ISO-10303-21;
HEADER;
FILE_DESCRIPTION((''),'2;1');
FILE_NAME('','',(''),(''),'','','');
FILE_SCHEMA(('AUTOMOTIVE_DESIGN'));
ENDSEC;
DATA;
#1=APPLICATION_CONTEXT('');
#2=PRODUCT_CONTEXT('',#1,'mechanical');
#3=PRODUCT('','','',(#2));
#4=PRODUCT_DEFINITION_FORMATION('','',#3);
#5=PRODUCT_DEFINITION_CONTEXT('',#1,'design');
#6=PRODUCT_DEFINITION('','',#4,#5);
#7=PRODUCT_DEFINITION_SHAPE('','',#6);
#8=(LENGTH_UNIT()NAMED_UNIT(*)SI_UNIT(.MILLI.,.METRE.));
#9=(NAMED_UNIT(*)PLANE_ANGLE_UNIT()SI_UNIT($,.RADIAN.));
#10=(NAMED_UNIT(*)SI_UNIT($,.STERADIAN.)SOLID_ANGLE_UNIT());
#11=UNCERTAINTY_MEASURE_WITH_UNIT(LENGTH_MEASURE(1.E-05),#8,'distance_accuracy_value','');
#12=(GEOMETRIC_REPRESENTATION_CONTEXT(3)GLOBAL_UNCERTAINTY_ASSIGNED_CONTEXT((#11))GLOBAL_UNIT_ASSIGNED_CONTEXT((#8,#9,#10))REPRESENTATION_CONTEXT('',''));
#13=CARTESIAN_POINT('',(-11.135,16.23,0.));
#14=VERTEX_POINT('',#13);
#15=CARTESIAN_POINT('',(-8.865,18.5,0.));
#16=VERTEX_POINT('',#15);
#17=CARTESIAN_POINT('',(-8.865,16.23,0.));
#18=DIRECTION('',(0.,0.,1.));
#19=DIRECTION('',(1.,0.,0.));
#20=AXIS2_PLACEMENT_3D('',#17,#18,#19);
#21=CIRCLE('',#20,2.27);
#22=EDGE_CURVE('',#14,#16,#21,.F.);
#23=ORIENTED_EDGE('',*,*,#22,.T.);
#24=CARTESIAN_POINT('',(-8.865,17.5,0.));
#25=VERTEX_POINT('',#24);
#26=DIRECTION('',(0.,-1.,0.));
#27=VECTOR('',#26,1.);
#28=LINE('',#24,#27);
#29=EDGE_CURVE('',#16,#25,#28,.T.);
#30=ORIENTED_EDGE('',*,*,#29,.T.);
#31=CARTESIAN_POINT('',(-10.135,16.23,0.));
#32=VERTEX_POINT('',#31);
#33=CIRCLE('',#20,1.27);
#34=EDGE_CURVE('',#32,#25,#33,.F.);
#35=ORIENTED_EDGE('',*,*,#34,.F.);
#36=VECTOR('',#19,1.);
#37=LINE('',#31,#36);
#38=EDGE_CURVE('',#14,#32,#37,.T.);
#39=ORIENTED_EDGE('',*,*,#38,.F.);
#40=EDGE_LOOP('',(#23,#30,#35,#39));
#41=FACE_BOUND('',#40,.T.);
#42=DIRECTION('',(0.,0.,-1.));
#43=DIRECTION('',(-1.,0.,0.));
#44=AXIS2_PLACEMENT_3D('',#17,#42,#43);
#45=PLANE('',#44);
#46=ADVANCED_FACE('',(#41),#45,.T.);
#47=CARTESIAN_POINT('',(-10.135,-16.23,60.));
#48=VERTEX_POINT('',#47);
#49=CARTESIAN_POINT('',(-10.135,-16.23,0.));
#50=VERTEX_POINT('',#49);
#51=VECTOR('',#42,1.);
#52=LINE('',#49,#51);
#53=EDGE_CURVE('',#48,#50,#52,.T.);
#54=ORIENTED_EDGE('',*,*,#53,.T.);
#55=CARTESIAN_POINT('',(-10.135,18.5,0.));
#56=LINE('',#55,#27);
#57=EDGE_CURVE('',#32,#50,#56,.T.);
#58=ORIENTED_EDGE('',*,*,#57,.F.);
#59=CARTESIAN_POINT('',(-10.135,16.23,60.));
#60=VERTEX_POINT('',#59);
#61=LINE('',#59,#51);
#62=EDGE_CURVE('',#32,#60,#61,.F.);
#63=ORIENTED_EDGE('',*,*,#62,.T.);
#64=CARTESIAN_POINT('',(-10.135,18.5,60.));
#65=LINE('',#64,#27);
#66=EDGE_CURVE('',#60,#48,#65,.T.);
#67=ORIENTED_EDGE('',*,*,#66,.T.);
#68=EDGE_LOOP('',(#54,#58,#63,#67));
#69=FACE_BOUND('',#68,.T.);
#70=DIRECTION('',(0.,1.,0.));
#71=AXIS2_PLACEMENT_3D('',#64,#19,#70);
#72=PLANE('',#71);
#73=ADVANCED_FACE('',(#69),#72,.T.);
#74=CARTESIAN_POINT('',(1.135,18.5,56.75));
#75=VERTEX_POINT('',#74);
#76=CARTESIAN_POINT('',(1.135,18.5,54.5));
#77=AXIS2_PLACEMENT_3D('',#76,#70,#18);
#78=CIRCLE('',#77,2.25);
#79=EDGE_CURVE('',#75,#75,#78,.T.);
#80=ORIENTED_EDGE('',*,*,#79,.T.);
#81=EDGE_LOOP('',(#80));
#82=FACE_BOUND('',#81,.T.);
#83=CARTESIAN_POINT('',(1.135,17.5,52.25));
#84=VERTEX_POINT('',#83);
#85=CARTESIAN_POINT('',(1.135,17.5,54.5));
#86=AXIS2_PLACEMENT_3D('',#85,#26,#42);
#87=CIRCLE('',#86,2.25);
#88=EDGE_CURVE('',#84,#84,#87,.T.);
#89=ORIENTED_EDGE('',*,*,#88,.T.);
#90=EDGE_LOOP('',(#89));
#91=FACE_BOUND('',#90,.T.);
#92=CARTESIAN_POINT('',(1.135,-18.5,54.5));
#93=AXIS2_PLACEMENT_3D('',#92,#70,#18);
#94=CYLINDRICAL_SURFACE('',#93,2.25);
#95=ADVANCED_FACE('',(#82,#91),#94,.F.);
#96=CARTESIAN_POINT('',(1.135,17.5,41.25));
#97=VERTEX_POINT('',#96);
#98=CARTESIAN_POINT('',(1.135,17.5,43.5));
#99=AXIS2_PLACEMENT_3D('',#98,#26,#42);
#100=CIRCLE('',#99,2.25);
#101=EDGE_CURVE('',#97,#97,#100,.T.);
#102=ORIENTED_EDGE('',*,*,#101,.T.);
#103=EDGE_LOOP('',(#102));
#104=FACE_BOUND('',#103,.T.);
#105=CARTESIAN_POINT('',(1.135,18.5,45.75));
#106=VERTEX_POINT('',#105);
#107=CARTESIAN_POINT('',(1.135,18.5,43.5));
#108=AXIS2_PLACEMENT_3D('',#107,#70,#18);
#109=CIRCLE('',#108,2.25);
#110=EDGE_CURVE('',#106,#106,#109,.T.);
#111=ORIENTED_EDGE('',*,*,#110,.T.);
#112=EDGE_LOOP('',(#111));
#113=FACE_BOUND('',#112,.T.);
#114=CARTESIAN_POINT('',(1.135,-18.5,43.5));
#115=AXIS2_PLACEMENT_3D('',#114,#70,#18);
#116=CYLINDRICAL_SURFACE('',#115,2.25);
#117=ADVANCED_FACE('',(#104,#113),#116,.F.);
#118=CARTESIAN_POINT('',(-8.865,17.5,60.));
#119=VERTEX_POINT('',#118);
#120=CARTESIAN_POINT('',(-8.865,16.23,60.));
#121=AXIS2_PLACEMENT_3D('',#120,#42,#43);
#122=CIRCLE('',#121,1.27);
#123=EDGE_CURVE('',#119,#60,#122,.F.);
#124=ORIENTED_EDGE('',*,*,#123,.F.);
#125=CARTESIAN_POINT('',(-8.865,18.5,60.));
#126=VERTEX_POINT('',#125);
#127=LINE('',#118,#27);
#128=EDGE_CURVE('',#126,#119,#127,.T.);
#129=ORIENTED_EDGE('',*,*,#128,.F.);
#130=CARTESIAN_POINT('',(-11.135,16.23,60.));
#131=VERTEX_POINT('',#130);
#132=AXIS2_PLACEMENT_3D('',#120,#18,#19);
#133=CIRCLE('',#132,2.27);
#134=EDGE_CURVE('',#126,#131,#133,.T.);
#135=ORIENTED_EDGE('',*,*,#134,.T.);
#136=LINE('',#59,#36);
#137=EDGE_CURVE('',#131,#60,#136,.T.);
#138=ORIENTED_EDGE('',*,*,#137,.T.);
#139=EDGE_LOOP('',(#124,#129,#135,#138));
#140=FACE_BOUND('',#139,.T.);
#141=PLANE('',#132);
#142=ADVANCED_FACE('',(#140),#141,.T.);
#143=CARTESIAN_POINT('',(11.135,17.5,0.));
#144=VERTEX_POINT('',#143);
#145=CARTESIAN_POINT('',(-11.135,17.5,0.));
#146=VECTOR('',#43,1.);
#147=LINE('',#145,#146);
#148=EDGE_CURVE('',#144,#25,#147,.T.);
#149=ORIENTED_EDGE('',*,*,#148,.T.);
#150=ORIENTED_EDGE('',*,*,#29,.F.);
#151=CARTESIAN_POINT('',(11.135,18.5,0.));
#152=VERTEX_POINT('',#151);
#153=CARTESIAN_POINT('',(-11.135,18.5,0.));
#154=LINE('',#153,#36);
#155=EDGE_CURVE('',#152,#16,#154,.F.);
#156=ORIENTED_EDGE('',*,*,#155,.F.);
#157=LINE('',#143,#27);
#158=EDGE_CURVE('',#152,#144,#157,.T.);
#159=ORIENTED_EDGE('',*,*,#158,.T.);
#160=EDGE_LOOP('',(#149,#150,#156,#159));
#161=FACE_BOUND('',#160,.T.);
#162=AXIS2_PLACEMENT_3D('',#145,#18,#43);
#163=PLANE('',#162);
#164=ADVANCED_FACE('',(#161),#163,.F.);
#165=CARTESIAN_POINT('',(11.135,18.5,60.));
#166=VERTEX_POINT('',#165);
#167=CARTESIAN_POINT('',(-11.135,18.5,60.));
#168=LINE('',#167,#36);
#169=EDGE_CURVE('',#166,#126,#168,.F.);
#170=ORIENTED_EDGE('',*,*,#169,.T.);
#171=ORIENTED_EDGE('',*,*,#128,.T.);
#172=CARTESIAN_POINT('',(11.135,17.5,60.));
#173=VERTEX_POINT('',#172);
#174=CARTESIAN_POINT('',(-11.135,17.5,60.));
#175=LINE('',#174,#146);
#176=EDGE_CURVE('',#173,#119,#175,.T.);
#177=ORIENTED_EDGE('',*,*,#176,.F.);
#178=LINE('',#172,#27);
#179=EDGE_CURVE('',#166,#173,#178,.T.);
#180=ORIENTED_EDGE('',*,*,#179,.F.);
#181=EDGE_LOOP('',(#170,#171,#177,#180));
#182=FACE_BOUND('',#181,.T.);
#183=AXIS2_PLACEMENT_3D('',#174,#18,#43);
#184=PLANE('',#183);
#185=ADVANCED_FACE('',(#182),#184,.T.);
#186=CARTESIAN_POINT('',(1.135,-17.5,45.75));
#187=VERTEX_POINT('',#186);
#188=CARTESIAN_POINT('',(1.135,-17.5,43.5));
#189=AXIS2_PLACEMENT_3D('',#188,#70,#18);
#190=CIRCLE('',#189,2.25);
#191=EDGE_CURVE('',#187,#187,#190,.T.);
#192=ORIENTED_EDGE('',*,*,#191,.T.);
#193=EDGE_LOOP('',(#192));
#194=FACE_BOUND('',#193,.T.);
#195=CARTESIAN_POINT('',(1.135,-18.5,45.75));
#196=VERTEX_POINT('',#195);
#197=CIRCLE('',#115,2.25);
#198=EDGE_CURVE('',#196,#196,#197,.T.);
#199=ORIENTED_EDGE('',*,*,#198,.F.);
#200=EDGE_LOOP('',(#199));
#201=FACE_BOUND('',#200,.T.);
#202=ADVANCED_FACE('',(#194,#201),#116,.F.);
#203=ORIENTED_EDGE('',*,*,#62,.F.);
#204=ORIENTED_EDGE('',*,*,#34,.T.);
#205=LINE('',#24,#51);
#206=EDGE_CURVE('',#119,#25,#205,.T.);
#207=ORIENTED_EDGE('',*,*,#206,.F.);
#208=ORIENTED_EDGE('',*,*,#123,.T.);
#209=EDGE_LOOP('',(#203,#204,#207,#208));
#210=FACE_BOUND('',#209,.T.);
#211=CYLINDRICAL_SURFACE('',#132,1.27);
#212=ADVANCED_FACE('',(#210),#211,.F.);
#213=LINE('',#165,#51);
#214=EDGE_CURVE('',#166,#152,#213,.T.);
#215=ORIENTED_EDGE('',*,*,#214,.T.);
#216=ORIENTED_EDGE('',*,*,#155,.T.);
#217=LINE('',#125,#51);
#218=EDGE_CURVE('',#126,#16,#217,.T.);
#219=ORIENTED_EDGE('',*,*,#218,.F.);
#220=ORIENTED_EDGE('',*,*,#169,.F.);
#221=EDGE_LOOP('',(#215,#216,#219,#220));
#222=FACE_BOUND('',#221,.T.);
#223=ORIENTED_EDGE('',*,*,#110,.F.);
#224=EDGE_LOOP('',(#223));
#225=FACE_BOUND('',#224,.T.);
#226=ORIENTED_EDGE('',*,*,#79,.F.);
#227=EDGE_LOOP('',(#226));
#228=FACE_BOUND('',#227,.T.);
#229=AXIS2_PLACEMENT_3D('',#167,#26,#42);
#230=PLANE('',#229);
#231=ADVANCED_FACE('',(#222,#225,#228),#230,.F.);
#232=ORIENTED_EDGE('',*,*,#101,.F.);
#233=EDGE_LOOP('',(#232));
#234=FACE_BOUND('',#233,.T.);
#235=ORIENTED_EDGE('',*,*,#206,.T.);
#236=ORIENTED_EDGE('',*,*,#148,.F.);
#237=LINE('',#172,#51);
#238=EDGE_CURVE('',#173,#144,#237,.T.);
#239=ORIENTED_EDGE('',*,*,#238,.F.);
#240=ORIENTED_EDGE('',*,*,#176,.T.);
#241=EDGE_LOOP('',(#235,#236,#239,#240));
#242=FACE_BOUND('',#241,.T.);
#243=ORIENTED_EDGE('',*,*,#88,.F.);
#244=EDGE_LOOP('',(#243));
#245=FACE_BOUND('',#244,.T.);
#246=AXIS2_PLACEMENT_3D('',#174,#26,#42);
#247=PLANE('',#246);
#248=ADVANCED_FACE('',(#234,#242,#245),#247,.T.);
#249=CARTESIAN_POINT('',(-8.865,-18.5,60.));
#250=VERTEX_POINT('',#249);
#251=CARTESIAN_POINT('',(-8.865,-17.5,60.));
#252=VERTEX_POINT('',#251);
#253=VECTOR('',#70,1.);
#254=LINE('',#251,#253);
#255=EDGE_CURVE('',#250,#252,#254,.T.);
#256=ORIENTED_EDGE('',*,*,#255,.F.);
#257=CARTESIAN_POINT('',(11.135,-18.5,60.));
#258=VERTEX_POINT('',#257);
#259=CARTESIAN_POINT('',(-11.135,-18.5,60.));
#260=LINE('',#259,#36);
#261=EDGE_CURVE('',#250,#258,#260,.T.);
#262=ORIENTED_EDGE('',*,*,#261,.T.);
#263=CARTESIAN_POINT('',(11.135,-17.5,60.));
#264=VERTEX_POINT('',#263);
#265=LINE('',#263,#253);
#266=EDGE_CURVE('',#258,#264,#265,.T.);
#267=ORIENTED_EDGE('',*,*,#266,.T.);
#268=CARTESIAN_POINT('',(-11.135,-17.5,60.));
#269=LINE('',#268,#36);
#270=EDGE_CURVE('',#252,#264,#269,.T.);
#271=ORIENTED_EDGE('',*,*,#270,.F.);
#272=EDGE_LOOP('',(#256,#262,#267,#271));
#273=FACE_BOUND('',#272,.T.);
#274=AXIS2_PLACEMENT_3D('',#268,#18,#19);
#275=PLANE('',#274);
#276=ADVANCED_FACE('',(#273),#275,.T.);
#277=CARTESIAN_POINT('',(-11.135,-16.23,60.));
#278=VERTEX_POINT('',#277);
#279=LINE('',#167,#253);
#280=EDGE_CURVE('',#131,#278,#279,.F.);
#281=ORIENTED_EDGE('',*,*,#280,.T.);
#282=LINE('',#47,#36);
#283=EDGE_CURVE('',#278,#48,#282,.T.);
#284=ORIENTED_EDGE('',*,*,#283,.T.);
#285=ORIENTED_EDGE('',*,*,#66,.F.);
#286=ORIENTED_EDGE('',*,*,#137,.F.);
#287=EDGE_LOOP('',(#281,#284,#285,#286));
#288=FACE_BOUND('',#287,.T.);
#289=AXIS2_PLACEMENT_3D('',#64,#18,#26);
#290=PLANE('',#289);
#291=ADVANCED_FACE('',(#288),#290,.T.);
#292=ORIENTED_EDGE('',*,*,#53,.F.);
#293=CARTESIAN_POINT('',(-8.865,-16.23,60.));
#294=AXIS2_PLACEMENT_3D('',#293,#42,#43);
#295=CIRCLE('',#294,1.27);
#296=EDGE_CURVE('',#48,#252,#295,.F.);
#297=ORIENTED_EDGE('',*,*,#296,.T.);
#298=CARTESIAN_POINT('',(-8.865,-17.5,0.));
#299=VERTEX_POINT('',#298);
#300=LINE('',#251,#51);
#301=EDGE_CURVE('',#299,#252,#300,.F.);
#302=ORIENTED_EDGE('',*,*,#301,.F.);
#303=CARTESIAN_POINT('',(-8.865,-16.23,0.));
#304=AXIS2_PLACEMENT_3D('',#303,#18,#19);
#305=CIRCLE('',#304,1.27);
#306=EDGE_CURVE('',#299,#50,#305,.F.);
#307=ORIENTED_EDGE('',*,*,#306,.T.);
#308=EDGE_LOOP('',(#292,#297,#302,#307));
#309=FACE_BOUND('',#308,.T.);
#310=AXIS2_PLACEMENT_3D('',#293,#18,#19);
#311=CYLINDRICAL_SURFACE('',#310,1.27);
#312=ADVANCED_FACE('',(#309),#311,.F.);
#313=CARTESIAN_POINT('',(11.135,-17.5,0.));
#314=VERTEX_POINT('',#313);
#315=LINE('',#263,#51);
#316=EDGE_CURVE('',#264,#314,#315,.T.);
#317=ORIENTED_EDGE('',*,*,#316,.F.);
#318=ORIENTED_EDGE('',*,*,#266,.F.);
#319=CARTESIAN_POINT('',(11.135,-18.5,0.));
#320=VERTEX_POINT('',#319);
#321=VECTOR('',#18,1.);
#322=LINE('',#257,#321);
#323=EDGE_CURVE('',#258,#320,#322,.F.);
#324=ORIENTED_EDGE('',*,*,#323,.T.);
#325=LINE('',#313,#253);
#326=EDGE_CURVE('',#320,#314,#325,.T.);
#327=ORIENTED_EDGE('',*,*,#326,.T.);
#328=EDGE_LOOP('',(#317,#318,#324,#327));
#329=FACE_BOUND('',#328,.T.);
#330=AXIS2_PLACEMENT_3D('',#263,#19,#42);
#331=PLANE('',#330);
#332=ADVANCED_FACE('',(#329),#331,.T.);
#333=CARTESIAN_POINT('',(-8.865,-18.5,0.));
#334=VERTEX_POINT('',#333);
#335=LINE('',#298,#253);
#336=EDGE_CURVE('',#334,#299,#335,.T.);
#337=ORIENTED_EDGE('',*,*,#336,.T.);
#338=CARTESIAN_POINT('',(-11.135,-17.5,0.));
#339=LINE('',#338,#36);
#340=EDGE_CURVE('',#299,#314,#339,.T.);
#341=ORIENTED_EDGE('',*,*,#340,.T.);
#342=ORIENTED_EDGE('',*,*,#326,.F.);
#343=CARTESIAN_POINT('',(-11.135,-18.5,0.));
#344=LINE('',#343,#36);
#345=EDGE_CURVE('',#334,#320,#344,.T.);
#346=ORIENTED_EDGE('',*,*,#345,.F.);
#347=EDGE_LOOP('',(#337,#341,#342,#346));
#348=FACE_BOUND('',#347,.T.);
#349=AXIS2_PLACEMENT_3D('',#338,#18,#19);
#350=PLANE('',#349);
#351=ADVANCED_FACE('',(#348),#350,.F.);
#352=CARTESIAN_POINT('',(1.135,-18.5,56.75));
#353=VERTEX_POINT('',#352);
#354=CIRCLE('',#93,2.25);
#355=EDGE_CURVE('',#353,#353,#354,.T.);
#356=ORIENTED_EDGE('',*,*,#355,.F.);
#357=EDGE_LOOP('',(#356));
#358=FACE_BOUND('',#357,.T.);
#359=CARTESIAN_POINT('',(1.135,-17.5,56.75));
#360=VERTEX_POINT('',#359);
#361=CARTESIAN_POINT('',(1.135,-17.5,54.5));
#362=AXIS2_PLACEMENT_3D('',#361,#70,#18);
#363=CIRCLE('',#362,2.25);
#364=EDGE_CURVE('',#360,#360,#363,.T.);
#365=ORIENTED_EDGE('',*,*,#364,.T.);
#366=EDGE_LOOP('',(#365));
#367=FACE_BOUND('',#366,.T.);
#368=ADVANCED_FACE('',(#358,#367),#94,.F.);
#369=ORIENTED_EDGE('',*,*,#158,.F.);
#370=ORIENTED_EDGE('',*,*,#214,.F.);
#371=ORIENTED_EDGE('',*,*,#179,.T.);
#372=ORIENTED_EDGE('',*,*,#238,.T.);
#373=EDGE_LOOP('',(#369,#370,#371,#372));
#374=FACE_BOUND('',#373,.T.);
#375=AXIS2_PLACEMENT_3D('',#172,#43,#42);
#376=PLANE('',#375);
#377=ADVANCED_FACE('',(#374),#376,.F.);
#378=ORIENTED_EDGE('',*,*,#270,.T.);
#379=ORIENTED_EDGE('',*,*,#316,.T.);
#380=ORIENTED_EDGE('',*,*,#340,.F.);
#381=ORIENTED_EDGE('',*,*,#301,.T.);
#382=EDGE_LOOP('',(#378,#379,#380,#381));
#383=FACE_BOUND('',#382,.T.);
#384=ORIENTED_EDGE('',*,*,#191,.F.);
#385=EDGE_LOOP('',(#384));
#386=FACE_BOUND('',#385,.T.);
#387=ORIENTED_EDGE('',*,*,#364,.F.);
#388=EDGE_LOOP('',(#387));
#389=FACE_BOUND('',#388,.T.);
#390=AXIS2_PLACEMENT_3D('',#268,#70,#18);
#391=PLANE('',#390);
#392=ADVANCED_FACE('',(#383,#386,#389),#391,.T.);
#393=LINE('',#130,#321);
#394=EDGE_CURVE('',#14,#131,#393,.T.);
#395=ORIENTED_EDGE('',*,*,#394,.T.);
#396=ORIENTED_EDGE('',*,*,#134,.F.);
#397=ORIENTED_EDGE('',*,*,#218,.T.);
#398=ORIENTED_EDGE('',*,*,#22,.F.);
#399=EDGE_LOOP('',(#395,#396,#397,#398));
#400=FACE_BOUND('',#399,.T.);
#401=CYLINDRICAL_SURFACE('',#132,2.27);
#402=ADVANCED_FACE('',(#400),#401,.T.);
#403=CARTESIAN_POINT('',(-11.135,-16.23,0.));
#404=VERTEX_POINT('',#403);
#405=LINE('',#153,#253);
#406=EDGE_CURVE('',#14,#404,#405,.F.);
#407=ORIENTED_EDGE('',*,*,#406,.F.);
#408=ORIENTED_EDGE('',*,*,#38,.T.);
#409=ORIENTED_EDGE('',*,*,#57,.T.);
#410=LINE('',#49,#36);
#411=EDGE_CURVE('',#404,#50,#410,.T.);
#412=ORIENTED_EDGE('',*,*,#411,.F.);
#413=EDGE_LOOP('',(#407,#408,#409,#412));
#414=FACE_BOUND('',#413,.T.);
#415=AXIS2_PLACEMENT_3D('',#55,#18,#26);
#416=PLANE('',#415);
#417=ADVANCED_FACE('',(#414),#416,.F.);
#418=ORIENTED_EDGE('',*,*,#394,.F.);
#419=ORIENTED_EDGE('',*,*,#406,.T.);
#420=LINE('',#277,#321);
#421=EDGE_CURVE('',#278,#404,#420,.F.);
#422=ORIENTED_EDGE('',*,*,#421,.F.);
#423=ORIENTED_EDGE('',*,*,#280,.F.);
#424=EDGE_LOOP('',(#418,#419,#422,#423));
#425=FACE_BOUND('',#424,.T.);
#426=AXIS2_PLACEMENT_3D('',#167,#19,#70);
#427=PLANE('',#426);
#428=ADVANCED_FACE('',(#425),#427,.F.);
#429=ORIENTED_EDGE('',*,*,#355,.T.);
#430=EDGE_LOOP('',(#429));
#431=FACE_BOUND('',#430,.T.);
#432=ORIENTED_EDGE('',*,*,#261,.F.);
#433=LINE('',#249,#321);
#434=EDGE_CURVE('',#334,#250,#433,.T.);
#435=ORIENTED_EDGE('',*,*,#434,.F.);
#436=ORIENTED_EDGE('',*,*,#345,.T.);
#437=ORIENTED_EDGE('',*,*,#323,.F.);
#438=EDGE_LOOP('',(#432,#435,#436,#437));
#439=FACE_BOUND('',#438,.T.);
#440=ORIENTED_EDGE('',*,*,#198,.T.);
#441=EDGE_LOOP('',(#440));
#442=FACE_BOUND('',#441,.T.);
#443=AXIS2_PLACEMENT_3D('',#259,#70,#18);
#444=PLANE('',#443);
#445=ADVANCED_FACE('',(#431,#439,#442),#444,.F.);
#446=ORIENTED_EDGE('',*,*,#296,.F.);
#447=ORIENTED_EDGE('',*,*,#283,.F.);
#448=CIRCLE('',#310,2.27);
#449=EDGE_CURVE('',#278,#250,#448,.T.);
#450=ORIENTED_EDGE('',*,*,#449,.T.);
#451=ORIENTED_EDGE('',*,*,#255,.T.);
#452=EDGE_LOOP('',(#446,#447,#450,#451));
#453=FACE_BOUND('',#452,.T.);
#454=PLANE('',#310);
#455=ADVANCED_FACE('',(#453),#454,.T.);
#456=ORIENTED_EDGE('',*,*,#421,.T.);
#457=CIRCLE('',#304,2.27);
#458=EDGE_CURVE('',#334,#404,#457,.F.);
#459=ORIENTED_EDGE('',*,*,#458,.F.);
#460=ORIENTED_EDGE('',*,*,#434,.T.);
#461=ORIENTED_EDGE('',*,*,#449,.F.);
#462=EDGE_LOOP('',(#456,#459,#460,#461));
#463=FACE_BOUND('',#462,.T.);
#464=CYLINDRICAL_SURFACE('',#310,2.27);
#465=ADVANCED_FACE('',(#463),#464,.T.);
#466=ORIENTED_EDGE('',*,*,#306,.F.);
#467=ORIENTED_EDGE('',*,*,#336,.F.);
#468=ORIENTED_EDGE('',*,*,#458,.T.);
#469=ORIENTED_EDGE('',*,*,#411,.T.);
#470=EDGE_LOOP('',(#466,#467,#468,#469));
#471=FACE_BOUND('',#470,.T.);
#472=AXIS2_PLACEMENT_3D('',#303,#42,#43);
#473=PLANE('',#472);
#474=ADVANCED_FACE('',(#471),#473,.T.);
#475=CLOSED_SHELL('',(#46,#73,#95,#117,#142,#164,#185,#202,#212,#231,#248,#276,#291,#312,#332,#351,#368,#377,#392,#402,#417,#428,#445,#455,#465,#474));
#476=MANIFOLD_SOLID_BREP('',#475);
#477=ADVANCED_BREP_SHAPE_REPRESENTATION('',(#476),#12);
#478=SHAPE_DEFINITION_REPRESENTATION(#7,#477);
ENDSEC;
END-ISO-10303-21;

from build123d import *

# Parameters (mm, degrees)
SKETCH1_W              = 22.27
SKETCH1_H              = 37
BOSS_EXTRUDE1_DEPTH    = 60
SHELL1_T               = -1
CONVERT_SOLID1_DEPTH   = 60
CONVERT_SOLID1_2_DEPTH = 60
SKETCH6_R              = 2.25
CUT_EXTRUDE1_DEPTH     = 72.365175156


# Read off the part's stored shape, not the designer's step: Convert-Solid1
with BuildPart() as part:
    # Sketch1 → Boss-Extrude1 (new body)
    with BuildSketch(Plane.XY):
        Rectangle(SKETCH1_W, SKETCH1_H)
    extrude(amount=BOSS_EXTRUDE1_DEPTH)

    # Shell1
    shell1_openings = [part.faces().sort_by_distance(p)[0] for p in [
        (0, 0, 60),
        (0, 0, 0),
        (11.135, 0, 30),
    ]]
    offset(amount=SHELL1_T, openings=shell1_openings, kind=Kind.INTERSECTION)

    # Convert-Solid1 outline → Convert-Solid1 (cut)
    with BuildSketch(Plane.XY):
        with BuildLine():
            Line((-11.135, 18.5), (-11.135, 16.23))
            ThreePointArc((-11.135, 16.23), (-10.470132393, 17.835132393), (-8.865, 18.5))
            Line((-8.865, 18.5), (-11.135, 18.5))
        make_face()
        with BuildLine():
            ThreePointArc((-8.865, -18.5), (-10.470132393, -17.835132393), (-11.135, -16.23))
            Line((-11.135, -16.23), (-11.135, -18.5))
            Line((-11.135, -18.5), (-8.865, -18.5))
        make_face()
    extrude(amount=CONVERT_SOLID1_DEPTH, mode=Mode.SUBTRACT)

    # Convert-Solid1 2 outline → Convert-Solid1 2 (add)
    with BuildSketch(Plane.XY):
        with BuildLine():
            Line((-10.135, 17.5), (-10.135, 16.23))
            ThreePointArc((-10.135, 16.23), (-9.763025612, 17.128025612), (-8.865, 17.5))
            Line((-8.865, 17.5), (-10.135, 17.5))
        make_face()
        with BuildLine():
            ThreePointArc((-8.865, -17.5), (-9.763025612, -17.128025612), (-10.135, -16.23))
            Line((-10.135, -16.23), (-10.135, -17.5))
            Line((-10.135, -17.5), (-8.865, -17.5))
        make_face()
    extrude(amount=CONVERT_SOLID1_2_DEPTH)

    # Sketch6 → Cut-Extrude1 (cut, through all)
    with BuildSketch(Plane(origin=(0, 18.5, 0), x_dir=(1, 0, 0), z_dir=(0, 1, 0))):
        with Locations(Location((1.135, -43.5, 0), (0, 0, 270))):
            Circle(SKETCH6_R)
        with Locations(Location((1.135, -54.5, 0), (0, 0, 270))):
            Circle(SKETCH6_R)
    extrude(amount=-CUT_EXTRUDE1_DEPTH, mode=Mode.SUBTRACT)


solid = part.part
